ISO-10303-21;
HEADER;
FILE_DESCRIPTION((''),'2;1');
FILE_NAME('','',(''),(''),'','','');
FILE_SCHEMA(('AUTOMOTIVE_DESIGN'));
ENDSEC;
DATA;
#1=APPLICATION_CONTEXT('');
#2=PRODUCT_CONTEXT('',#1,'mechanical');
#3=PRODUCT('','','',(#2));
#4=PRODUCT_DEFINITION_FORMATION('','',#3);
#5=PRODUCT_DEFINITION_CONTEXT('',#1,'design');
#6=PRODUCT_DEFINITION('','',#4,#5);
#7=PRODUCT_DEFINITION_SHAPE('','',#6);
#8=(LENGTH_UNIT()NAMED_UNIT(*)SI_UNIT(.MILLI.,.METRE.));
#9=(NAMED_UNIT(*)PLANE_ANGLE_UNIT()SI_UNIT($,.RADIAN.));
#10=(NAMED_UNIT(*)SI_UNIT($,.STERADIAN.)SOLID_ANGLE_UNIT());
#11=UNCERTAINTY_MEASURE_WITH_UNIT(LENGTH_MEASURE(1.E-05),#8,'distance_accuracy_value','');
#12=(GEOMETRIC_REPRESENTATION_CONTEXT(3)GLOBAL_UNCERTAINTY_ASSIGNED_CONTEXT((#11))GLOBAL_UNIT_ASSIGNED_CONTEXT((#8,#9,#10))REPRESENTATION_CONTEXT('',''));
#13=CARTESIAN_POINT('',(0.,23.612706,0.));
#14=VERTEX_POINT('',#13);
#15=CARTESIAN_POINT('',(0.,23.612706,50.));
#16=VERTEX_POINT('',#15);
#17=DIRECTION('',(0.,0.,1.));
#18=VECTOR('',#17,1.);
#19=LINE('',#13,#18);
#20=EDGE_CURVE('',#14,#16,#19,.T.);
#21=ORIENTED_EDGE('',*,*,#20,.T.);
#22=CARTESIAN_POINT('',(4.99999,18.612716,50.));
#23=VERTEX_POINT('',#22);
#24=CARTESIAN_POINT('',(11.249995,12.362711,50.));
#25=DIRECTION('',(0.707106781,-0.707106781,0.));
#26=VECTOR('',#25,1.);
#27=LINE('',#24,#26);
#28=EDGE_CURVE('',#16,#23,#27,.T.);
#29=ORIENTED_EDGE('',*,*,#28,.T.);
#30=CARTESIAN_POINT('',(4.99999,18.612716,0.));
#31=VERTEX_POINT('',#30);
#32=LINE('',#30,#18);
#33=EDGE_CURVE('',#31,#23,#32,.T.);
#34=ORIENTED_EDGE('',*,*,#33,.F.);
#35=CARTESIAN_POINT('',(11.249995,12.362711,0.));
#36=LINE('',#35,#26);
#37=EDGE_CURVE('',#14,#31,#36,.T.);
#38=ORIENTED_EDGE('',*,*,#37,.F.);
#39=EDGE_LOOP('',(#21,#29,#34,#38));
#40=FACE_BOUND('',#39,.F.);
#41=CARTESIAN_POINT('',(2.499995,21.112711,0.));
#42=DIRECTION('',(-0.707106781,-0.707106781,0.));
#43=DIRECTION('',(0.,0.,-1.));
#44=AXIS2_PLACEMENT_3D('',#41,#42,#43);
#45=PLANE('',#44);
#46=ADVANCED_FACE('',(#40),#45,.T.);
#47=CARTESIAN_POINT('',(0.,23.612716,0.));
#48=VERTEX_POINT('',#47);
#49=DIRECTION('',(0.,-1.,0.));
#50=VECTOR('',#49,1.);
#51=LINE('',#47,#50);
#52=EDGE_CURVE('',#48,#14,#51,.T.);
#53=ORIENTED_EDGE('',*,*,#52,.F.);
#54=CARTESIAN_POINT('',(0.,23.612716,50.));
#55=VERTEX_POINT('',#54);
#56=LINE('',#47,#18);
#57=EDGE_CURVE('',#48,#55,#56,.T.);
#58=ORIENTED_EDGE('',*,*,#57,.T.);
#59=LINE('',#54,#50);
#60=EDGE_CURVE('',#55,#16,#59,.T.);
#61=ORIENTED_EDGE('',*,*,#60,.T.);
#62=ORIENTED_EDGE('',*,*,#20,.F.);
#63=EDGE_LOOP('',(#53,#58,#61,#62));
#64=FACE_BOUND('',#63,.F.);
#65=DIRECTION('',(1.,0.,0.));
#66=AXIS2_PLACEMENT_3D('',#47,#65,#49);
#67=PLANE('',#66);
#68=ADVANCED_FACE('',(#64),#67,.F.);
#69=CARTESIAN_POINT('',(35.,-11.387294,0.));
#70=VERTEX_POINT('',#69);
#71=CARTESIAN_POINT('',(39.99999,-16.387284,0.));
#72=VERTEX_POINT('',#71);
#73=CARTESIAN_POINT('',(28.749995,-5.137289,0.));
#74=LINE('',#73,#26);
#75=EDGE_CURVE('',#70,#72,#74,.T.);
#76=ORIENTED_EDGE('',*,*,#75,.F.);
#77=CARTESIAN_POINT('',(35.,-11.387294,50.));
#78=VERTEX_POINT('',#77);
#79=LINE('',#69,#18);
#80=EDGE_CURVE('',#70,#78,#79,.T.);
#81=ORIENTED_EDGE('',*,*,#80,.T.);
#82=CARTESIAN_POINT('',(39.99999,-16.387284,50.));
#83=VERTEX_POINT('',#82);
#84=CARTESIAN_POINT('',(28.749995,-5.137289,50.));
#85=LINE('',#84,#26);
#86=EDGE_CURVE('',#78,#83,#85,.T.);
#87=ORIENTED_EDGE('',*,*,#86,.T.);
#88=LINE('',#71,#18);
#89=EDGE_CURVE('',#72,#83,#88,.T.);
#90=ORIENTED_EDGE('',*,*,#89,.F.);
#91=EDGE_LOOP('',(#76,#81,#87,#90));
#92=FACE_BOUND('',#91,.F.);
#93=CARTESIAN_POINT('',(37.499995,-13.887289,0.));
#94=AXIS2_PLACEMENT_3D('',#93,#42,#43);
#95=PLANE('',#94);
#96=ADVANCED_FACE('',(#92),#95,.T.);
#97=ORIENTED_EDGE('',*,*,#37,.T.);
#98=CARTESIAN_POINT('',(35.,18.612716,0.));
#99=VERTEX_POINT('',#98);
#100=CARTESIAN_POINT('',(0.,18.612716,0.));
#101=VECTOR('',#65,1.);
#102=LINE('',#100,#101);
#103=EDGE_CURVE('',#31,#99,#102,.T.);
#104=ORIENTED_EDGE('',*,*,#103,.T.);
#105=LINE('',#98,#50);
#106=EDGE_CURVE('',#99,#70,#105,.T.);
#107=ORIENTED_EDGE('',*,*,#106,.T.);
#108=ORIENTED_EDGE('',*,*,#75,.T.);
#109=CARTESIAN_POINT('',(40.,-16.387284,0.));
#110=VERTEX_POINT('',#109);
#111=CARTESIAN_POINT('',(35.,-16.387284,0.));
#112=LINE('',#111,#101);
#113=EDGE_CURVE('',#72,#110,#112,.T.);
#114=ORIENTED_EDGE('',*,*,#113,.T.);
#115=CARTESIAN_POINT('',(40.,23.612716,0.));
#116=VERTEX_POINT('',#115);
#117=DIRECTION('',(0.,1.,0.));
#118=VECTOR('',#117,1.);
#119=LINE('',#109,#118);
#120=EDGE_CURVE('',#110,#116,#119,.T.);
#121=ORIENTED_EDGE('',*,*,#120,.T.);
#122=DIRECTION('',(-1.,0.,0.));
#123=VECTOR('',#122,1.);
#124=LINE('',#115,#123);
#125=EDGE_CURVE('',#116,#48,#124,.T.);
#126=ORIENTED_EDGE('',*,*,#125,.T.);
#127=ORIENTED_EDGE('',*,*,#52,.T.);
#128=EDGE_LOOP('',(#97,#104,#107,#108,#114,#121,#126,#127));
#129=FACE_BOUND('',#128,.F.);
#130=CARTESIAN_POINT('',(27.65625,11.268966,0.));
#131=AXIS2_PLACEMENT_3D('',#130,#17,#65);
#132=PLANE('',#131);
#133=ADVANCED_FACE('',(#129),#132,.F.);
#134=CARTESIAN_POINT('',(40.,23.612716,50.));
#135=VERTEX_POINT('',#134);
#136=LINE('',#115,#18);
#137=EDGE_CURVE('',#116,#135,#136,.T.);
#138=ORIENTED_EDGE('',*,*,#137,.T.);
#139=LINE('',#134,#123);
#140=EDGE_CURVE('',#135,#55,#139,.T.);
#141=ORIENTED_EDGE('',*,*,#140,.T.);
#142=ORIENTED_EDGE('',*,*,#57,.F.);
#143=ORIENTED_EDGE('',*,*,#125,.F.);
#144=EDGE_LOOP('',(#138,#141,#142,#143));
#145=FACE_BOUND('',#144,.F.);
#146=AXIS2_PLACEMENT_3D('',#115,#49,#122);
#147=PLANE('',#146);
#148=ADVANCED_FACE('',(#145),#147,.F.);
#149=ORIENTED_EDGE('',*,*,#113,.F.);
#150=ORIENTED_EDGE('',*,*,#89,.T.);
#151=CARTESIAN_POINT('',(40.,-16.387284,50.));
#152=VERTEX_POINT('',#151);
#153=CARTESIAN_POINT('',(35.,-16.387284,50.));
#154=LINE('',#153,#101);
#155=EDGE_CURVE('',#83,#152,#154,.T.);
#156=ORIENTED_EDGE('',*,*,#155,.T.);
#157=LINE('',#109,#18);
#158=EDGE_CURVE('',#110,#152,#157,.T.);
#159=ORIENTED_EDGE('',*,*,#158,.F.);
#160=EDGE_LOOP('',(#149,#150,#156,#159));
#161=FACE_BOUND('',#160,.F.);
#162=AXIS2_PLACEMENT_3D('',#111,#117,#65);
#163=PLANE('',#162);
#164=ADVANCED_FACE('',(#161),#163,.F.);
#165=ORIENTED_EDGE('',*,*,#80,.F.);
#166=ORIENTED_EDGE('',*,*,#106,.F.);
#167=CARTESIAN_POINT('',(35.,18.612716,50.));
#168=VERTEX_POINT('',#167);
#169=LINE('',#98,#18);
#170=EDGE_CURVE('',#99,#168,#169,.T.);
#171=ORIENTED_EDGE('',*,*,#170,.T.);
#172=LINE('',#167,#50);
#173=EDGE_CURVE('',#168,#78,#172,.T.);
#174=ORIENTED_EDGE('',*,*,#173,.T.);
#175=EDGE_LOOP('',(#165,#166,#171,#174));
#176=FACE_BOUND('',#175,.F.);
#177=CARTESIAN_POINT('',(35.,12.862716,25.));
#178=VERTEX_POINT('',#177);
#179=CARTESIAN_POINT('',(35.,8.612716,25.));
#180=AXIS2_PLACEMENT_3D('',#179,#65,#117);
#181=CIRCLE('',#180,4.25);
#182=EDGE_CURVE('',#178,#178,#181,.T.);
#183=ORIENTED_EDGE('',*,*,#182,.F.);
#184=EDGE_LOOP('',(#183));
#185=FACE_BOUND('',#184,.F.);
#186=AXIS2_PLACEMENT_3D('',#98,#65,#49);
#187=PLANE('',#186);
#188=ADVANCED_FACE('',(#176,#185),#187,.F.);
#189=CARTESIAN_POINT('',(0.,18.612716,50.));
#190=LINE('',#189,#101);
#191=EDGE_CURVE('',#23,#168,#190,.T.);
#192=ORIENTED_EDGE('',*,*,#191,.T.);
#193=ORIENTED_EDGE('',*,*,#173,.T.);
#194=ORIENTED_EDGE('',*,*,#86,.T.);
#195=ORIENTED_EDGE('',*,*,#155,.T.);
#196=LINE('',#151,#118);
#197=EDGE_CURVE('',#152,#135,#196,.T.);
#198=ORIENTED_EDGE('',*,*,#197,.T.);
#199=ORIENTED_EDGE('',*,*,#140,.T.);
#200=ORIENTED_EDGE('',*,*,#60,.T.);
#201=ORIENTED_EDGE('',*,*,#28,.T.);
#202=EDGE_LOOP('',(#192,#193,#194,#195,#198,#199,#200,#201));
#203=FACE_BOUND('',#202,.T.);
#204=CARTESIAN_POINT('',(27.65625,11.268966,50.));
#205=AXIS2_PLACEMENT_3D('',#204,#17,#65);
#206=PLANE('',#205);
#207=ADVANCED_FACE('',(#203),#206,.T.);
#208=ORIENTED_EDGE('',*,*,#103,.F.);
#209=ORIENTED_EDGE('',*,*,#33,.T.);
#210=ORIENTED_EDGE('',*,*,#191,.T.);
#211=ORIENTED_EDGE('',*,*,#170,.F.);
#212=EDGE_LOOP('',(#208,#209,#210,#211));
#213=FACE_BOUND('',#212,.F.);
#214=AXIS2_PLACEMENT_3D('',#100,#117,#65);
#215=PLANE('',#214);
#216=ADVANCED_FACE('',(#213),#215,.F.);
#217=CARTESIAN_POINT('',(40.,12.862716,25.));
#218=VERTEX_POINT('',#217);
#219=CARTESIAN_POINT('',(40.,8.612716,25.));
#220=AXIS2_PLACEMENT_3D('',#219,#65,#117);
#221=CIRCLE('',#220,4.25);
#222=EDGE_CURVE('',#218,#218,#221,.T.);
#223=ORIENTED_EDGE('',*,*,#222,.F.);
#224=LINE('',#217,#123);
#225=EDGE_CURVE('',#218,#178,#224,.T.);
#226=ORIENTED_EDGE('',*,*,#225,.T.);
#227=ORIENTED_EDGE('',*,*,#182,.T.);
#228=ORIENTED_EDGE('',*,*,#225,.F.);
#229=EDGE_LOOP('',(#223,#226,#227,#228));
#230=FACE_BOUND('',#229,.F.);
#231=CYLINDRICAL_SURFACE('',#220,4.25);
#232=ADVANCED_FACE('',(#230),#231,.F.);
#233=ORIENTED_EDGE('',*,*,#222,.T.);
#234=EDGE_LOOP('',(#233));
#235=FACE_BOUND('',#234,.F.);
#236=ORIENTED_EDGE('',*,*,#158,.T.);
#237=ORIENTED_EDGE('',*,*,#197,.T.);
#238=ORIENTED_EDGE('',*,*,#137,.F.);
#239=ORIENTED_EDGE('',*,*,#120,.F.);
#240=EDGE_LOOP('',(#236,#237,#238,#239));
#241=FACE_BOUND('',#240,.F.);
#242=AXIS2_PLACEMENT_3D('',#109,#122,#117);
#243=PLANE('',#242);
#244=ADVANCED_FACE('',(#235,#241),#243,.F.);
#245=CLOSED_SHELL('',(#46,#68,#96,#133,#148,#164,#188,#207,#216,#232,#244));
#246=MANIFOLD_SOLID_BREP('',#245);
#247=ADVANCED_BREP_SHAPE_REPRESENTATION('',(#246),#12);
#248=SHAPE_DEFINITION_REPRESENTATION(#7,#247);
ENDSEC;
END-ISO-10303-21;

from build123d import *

# Parameters (mm, degrees)
F1_DEPTH = 50
F2_SIZE  = 4.99999
F3_R     = 4.25
F4_DEPTH = 25


# Not quite as in the source:
# - a fillet or chamfer is up to 0.001 mm smaller than in the source, because OpenCascade refuses the exact size


with BuildPart() as f1:
    # F0 (on Top) → F1 (new body)
    with BuildSketch(Plane.XY):
        Polygon((40, 23.61271578), (0, 23.61271578), (0, 18.61271578), (35, 18.61271578), (35, -16.38728422), (40, -16.38728422), align=None)
    extrude(amount=F1_DEPTH)

    # F2 (size 5 in the source; OpenCascade refuses exactly that, so slightly less here)
    f2_edges = [f1.edges().sort_by_distance(p)[0] for p in [
        (0, 18.612716, 25),
        (35, -16.387284, 25),
    ]]
    chamfer(f2_edges, length=F2_SIZE)

    # F3 (on face) → F4 (cut)
    with BuildSketch(Plane.YZ.offset(40)):
        with Locations((8.61271578, 25)):
            Circle(F3_R)
    extrude(amount=-F4_DEPTH, mode=Mode.SUBTRACT)


solid = f1.part
